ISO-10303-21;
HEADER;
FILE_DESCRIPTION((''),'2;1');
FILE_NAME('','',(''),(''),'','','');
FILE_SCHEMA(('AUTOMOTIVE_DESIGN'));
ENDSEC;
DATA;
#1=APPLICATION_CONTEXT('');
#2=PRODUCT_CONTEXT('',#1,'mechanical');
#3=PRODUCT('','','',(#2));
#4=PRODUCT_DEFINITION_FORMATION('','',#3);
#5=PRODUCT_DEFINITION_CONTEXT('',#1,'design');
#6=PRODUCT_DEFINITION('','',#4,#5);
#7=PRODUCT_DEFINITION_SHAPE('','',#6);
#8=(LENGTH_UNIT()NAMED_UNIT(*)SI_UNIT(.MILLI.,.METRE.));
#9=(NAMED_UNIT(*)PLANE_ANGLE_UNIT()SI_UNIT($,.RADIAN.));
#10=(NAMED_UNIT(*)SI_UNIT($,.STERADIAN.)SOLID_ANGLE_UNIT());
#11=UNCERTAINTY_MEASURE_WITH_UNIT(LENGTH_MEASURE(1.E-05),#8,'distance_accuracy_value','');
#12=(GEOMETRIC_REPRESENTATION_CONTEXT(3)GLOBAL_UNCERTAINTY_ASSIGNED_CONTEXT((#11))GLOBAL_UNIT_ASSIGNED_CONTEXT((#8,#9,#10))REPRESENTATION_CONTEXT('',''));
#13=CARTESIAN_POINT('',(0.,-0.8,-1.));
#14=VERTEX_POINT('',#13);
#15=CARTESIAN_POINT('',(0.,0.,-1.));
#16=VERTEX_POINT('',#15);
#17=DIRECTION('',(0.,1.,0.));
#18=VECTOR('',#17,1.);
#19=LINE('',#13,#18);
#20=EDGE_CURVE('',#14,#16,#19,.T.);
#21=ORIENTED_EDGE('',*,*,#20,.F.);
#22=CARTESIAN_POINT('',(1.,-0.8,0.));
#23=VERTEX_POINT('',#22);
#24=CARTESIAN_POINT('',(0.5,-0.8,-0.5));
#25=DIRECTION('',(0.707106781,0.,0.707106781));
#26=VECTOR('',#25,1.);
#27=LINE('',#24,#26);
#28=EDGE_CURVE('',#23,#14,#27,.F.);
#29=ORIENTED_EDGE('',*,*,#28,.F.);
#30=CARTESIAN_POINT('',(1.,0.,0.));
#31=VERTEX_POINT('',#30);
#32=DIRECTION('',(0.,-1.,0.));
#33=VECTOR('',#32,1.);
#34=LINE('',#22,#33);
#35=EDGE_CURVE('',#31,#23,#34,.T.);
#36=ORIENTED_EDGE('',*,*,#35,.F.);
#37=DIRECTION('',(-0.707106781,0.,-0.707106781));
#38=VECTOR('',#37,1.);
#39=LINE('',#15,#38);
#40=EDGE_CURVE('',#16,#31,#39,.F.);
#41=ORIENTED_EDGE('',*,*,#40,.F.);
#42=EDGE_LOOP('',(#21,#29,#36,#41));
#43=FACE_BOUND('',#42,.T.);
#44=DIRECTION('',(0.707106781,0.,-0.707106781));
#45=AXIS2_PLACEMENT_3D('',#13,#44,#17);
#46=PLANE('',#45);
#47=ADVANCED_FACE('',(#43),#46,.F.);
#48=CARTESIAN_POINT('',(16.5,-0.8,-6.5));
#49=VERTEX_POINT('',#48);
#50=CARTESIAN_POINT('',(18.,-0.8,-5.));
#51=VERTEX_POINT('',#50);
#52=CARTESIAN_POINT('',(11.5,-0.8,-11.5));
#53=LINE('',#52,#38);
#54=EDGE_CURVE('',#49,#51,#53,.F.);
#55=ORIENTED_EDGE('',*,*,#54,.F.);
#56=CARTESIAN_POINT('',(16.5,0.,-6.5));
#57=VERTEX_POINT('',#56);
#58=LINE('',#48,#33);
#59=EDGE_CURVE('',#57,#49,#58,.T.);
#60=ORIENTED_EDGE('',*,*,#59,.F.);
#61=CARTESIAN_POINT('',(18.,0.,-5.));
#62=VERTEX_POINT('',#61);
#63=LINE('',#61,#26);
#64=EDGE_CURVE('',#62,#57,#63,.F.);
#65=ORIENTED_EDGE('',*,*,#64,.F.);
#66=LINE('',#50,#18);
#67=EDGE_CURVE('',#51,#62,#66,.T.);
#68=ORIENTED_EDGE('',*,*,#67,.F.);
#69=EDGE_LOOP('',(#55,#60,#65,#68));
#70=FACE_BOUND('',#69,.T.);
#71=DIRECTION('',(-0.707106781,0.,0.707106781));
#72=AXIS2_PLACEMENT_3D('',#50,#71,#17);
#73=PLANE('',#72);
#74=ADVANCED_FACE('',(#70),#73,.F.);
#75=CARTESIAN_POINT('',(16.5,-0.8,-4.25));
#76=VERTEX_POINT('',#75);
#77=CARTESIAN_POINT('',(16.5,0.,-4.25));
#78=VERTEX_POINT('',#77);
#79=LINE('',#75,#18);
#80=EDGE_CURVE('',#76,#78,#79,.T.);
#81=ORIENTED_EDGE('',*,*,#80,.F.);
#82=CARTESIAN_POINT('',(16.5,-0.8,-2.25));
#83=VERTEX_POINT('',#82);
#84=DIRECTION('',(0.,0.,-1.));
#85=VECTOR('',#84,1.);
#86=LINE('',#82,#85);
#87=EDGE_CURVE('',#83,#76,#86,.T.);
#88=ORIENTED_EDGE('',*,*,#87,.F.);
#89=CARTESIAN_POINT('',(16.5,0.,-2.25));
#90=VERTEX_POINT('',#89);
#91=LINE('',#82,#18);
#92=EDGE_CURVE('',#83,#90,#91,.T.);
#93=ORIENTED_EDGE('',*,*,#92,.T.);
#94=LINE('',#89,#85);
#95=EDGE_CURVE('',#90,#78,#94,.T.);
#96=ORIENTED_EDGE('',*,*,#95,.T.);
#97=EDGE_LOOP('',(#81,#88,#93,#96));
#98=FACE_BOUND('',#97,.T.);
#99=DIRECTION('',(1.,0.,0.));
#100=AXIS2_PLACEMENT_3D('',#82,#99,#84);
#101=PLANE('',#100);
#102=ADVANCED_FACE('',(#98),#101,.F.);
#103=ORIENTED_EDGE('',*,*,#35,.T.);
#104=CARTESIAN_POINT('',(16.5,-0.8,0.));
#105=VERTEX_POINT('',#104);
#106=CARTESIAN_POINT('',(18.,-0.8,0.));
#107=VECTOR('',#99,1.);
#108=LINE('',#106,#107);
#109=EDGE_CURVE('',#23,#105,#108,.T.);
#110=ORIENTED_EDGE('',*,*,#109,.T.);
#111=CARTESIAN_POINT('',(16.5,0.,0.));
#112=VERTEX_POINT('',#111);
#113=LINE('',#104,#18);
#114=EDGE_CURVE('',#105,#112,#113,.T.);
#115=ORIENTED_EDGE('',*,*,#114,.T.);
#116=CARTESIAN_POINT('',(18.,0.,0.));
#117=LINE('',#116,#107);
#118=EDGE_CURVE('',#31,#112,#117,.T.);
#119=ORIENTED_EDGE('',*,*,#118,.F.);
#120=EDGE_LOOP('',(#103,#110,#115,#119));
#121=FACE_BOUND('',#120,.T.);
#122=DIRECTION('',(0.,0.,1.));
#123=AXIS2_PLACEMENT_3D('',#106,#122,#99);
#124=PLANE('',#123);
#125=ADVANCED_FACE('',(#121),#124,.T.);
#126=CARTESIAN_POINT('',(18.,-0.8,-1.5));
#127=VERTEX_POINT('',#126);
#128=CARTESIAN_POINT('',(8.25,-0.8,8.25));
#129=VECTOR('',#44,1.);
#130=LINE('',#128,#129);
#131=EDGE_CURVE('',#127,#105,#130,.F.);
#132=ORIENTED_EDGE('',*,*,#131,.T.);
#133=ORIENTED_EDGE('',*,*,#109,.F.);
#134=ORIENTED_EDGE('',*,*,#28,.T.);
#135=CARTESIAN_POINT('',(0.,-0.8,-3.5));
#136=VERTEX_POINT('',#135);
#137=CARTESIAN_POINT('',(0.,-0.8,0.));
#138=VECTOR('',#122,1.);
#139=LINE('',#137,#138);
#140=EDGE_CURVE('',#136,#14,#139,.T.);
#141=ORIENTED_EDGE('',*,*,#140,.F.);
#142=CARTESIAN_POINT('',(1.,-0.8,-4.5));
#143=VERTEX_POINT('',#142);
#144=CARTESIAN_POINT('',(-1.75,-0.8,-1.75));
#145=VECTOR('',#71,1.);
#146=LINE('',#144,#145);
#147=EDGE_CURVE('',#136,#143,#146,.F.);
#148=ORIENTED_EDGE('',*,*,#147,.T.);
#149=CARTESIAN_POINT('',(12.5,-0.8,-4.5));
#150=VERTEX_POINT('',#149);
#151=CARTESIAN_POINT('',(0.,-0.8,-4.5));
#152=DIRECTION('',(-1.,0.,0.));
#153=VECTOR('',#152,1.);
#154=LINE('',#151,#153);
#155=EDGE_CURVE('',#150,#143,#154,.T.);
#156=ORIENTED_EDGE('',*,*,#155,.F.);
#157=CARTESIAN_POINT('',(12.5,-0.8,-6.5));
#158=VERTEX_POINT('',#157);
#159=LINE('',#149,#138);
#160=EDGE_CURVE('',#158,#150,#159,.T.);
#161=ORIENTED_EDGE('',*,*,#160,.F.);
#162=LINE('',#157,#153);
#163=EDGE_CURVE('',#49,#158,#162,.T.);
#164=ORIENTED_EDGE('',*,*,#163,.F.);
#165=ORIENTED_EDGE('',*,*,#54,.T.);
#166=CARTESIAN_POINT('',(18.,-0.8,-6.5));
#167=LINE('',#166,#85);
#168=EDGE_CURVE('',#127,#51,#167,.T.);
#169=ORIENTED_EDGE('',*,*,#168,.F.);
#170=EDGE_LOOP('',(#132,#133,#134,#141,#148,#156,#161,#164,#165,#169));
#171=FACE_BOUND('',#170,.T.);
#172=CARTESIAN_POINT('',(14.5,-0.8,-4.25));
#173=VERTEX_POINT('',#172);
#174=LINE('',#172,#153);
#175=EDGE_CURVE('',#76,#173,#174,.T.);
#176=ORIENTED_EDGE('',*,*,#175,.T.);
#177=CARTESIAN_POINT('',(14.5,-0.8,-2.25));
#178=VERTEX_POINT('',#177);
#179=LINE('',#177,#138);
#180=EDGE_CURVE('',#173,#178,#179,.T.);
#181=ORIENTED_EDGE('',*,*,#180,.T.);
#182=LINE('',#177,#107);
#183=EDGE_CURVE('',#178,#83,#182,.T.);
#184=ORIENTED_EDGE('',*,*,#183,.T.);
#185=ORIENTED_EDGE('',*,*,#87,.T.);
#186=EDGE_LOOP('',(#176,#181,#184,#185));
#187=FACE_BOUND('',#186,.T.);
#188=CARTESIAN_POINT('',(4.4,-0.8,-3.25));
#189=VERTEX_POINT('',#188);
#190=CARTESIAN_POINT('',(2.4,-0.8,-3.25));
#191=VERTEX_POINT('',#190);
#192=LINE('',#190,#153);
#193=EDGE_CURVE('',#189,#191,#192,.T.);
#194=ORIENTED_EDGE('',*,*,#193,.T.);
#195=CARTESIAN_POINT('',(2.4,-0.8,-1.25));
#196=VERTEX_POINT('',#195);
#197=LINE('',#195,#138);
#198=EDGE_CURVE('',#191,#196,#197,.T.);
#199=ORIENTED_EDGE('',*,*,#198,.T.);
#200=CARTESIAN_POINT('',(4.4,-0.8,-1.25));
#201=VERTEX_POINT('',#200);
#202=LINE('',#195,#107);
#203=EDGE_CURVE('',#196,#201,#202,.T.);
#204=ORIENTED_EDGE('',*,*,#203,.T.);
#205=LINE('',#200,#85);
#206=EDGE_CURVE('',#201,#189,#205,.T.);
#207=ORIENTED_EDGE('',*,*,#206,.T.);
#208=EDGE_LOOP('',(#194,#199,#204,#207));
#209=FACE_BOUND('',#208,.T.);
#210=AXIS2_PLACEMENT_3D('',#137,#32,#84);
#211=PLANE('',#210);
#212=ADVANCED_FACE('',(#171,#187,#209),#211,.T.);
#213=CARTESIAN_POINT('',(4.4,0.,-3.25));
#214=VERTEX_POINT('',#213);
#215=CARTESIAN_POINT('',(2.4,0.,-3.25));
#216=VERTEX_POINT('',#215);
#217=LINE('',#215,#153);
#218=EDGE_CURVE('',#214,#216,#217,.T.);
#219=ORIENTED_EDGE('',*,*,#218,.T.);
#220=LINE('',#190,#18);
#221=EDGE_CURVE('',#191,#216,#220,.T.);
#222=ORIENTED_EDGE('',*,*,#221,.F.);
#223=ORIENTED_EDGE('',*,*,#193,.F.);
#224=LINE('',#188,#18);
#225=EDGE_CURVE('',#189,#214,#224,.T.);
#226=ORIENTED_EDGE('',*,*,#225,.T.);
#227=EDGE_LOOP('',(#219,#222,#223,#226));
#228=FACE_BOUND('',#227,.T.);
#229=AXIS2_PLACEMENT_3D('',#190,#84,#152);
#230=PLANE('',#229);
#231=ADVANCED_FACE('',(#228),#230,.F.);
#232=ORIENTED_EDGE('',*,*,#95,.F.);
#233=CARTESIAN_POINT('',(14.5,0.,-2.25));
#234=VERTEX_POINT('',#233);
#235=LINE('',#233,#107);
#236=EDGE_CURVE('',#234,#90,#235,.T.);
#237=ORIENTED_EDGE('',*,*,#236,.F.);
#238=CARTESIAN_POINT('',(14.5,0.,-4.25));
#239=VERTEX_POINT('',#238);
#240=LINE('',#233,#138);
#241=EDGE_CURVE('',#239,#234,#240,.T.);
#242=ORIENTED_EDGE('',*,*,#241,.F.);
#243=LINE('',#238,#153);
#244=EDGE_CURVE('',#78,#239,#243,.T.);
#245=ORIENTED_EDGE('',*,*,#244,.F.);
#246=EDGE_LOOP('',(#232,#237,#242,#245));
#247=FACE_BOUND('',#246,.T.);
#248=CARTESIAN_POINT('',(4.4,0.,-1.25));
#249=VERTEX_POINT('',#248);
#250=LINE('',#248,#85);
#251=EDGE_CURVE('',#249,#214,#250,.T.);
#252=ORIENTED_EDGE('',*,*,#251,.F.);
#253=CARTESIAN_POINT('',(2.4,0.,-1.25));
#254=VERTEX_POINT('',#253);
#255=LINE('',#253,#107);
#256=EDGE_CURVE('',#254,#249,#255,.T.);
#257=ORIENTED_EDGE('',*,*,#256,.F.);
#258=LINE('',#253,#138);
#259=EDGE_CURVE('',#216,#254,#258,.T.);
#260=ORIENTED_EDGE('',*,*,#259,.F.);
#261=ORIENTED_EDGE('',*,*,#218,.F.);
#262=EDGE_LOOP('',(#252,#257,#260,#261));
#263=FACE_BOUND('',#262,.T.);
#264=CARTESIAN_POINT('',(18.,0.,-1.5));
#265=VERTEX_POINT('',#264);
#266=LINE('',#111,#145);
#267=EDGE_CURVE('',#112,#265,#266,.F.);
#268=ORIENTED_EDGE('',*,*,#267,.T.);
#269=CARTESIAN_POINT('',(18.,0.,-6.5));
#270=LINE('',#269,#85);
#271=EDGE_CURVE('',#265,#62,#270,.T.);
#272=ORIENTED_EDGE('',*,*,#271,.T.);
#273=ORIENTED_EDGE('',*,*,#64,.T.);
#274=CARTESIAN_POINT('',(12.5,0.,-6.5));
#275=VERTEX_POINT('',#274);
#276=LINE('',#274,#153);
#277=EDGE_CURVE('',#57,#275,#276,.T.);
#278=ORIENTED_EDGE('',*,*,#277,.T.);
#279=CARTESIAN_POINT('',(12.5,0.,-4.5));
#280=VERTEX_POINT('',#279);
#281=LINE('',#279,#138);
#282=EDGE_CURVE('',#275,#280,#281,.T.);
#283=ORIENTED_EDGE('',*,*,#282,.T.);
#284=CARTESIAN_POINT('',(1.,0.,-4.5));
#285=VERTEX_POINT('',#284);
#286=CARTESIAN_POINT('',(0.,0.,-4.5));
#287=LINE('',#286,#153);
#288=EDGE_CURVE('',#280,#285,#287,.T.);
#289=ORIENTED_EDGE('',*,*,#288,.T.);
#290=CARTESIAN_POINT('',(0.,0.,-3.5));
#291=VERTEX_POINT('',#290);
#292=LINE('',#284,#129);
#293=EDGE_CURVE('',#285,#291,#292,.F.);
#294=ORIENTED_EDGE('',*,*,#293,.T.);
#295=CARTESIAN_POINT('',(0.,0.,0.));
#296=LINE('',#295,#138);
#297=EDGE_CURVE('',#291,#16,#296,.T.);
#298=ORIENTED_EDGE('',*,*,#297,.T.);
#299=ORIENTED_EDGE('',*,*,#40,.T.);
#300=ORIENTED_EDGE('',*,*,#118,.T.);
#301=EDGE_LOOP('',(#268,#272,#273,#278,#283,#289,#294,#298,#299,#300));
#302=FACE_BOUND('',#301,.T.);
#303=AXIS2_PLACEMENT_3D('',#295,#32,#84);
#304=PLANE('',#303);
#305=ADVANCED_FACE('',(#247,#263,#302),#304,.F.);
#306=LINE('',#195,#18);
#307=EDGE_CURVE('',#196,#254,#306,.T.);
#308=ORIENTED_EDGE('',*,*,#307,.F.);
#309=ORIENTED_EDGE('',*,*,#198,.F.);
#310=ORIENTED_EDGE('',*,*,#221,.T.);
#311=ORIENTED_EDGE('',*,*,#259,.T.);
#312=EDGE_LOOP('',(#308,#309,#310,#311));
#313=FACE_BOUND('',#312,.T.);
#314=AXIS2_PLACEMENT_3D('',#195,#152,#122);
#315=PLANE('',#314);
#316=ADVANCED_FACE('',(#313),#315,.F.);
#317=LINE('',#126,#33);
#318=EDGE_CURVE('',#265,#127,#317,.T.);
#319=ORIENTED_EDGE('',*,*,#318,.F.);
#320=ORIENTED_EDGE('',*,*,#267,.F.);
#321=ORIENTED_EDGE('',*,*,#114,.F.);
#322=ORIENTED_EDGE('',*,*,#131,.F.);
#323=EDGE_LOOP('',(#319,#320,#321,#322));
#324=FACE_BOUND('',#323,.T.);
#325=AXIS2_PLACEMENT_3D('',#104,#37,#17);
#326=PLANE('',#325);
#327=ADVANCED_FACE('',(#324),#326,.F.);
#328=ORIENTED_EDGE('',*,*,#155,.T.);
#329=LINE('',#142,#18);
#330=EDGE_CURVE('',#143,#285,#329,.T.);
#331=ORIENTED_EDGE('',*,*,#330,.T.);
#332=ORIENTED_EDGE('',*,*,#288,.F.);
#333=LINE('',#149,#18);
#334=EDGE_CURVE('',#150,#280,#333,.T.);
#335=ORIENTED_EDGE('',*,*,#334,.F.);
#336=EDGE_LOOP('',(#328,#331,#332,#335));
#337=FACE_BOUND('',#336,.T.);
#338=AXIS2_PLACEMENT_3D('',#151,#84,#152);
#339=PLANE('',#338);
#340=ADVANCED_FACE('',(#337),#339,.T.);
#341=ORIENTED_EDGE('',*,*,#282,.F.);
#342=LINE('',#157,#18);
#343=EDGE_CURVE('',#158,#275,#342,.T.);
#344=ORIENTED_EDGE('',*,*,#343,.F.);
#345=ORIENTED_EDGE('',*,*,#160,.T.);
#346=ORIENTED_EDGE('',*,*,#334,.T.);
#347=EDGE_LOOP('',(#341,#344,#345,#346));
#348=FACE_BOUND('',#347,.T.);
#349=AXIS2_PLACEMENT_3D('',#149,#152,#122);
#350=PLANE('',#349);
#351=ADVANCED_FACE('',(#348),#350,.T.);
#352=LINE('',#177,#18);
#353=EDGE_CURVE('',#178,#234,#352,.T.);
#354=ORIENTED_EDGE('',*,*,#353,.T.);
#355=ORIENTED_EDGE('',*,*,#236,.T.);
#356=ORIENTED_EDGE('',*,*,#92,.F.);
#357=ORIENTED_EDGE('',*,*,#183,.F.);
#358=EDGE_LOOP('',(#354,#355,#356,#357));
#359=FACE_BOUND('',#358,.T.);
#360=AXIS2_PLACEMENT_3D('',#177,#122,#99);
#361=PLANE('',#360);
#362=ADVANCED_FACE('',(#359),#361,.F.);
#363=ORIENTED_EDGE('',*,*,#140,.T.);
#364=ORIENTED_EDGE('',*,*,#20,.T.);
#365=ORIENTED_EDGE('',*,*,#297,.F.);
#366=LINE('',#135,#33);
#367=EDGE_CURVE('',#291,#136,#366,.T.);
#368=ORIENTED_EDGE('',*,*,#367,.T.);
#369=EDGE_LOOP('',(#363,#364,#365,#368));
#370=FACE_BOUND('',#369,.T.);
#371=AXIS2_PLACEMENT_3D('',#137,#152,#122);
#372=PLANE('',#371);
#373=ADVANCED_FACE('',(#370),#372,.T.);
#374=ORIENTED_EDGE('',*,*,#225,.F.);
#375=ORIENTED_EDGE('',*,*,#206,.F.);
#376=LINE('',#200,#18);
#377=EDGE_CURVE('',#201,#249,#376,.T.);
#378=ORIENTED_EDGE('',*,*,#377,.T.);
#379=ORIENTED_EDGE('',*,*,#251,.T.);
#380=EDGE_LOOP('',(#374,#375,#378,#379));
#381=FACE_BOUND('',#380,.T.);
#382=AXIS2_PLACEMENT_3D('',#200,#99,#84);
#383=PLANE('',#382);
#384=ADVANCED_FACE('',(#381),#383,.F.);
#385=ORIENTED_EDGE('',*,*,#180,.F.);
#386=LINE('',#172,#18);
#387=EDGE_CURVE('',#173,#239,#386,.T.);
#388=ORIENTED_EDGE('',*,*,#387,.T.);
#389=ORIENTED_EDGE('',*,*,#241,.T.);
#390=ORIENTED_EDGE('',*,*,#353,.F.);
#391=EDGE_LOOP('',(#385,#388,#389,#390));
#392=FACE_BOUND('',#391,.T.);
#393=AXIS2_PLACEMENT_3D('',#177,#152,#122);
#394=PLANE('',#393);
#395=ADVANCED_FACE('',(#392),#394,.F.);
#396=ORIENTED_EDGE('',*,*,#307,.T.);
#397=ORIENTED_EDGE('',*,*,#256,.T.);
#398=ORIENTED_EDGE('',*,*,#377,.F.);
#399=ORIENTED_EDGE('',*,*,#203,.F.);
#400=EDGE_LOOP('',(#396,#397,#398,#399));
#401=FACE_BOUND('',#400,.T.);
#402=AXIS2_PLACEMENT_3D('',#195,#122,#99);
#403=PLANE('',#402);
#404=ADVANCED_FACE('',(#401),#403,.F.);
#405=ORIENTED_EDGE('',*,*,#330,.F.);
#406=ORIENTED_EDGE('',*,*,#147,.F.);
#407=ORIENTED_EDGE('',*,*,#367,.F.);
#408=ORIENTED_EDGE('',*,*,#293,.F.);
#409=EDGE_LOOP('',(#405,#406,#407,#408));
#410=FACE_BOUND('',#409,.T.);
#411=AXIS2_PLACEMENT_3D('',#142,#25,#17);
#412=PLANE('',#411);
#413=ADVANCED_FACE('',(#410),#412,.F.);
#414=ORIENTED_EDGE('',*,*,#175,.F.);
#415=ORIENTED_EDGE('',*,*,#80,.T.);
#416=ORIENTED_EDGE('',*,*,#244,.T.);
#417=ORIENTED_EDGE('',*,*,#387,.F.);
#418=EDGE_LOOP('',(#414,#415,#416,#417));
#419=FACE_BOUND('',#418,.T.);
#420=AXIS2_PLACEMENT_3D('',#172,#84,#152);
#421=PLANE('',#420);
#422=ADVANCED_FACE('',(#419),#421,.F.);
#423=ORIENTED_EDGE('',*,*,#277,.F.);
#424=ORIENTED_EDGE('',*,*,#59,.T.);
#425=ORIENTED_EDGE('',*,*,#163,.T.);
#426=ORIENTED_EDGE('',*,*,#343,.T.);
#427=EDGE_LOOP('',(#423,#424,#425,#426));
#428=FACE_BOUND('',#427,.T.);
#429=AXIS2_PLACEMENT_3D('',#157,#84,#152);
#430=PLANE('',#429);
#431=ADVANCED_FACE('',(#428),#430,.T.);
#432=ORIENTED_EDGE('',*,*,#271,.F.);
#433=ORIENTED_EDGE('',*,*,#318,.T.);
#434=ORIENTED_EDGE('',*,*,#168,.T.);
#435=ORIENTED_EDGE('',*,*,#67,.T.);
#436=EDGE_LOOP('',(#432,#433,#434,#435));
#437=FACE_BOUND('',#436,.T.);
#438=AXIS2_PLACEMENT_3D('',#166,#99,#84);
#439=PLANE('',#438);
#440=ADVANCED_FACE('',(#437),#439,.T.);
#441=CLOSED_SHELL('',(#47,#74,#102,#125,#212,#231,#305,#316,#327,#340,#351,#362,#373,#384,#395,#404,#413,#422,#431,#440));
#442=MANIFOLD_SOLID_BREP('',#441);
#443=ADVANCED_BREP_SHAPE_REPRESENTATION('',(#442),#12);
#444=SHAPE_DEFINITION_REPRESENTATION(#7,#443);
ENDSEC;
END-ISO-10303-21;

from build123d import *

# Parameters (mm, degrees)
SKETCH_1_W             = 2
SKETCH_1_H             = 2
SM_BASE_FLANGE_1_DEPTH = 0.8
CHAMFER_1_SIZE         = 1
CHAMFER_2_SIZE         = 1.5


# Sheet-metal steps are written as plain solids
with BuildPart() as part:
    # Sketch 1 → Базовая кромка1 (new body)
    with BuildSketch(Plane(origin=(0, 0, 0), x_dir=(1, 0, 0), z_dir=(0, 1, 0))):
        Polygon((0, 0), (0, 4.5), (12.5, 4.5), (12.5, 6.5), (18, 6.5), (18, 0), align=None)
        with Locations((3.4, 2.25)):
            Rectangle(SKETCH_1_W, SKETCH_1_H, mode=Mode.SUBTRACT)
        with Locations((15.5, 3.25)):
            Rectangle(SKETCH_1_W, SKETCH_1_H, mode=Mode.SUBTRACT)
    extrude(amount=-SM_BASE_FLANGE_1_DEPTH)

    # Фаска1
    chamfer_1_edges = [part.edges().sort_by_distance(p)[0] for p in [
        (0, -0.4, 0),
        (0, -0.4, -4.5),
    ]]
    chamfer(chamfer_1_edges, length=CHAMFER_1_SIZE)

    # Фаска2
    chamfer_2_edges = [part.edges().sort_by_distance(p)[0] for p in [
        (18, -0.4, -6.5),
        (18, -0.4, 0),
    ]]
    chamfer(chamfer_2_edges, length=CHAMFER_2_SIZE)


solid = part.part
